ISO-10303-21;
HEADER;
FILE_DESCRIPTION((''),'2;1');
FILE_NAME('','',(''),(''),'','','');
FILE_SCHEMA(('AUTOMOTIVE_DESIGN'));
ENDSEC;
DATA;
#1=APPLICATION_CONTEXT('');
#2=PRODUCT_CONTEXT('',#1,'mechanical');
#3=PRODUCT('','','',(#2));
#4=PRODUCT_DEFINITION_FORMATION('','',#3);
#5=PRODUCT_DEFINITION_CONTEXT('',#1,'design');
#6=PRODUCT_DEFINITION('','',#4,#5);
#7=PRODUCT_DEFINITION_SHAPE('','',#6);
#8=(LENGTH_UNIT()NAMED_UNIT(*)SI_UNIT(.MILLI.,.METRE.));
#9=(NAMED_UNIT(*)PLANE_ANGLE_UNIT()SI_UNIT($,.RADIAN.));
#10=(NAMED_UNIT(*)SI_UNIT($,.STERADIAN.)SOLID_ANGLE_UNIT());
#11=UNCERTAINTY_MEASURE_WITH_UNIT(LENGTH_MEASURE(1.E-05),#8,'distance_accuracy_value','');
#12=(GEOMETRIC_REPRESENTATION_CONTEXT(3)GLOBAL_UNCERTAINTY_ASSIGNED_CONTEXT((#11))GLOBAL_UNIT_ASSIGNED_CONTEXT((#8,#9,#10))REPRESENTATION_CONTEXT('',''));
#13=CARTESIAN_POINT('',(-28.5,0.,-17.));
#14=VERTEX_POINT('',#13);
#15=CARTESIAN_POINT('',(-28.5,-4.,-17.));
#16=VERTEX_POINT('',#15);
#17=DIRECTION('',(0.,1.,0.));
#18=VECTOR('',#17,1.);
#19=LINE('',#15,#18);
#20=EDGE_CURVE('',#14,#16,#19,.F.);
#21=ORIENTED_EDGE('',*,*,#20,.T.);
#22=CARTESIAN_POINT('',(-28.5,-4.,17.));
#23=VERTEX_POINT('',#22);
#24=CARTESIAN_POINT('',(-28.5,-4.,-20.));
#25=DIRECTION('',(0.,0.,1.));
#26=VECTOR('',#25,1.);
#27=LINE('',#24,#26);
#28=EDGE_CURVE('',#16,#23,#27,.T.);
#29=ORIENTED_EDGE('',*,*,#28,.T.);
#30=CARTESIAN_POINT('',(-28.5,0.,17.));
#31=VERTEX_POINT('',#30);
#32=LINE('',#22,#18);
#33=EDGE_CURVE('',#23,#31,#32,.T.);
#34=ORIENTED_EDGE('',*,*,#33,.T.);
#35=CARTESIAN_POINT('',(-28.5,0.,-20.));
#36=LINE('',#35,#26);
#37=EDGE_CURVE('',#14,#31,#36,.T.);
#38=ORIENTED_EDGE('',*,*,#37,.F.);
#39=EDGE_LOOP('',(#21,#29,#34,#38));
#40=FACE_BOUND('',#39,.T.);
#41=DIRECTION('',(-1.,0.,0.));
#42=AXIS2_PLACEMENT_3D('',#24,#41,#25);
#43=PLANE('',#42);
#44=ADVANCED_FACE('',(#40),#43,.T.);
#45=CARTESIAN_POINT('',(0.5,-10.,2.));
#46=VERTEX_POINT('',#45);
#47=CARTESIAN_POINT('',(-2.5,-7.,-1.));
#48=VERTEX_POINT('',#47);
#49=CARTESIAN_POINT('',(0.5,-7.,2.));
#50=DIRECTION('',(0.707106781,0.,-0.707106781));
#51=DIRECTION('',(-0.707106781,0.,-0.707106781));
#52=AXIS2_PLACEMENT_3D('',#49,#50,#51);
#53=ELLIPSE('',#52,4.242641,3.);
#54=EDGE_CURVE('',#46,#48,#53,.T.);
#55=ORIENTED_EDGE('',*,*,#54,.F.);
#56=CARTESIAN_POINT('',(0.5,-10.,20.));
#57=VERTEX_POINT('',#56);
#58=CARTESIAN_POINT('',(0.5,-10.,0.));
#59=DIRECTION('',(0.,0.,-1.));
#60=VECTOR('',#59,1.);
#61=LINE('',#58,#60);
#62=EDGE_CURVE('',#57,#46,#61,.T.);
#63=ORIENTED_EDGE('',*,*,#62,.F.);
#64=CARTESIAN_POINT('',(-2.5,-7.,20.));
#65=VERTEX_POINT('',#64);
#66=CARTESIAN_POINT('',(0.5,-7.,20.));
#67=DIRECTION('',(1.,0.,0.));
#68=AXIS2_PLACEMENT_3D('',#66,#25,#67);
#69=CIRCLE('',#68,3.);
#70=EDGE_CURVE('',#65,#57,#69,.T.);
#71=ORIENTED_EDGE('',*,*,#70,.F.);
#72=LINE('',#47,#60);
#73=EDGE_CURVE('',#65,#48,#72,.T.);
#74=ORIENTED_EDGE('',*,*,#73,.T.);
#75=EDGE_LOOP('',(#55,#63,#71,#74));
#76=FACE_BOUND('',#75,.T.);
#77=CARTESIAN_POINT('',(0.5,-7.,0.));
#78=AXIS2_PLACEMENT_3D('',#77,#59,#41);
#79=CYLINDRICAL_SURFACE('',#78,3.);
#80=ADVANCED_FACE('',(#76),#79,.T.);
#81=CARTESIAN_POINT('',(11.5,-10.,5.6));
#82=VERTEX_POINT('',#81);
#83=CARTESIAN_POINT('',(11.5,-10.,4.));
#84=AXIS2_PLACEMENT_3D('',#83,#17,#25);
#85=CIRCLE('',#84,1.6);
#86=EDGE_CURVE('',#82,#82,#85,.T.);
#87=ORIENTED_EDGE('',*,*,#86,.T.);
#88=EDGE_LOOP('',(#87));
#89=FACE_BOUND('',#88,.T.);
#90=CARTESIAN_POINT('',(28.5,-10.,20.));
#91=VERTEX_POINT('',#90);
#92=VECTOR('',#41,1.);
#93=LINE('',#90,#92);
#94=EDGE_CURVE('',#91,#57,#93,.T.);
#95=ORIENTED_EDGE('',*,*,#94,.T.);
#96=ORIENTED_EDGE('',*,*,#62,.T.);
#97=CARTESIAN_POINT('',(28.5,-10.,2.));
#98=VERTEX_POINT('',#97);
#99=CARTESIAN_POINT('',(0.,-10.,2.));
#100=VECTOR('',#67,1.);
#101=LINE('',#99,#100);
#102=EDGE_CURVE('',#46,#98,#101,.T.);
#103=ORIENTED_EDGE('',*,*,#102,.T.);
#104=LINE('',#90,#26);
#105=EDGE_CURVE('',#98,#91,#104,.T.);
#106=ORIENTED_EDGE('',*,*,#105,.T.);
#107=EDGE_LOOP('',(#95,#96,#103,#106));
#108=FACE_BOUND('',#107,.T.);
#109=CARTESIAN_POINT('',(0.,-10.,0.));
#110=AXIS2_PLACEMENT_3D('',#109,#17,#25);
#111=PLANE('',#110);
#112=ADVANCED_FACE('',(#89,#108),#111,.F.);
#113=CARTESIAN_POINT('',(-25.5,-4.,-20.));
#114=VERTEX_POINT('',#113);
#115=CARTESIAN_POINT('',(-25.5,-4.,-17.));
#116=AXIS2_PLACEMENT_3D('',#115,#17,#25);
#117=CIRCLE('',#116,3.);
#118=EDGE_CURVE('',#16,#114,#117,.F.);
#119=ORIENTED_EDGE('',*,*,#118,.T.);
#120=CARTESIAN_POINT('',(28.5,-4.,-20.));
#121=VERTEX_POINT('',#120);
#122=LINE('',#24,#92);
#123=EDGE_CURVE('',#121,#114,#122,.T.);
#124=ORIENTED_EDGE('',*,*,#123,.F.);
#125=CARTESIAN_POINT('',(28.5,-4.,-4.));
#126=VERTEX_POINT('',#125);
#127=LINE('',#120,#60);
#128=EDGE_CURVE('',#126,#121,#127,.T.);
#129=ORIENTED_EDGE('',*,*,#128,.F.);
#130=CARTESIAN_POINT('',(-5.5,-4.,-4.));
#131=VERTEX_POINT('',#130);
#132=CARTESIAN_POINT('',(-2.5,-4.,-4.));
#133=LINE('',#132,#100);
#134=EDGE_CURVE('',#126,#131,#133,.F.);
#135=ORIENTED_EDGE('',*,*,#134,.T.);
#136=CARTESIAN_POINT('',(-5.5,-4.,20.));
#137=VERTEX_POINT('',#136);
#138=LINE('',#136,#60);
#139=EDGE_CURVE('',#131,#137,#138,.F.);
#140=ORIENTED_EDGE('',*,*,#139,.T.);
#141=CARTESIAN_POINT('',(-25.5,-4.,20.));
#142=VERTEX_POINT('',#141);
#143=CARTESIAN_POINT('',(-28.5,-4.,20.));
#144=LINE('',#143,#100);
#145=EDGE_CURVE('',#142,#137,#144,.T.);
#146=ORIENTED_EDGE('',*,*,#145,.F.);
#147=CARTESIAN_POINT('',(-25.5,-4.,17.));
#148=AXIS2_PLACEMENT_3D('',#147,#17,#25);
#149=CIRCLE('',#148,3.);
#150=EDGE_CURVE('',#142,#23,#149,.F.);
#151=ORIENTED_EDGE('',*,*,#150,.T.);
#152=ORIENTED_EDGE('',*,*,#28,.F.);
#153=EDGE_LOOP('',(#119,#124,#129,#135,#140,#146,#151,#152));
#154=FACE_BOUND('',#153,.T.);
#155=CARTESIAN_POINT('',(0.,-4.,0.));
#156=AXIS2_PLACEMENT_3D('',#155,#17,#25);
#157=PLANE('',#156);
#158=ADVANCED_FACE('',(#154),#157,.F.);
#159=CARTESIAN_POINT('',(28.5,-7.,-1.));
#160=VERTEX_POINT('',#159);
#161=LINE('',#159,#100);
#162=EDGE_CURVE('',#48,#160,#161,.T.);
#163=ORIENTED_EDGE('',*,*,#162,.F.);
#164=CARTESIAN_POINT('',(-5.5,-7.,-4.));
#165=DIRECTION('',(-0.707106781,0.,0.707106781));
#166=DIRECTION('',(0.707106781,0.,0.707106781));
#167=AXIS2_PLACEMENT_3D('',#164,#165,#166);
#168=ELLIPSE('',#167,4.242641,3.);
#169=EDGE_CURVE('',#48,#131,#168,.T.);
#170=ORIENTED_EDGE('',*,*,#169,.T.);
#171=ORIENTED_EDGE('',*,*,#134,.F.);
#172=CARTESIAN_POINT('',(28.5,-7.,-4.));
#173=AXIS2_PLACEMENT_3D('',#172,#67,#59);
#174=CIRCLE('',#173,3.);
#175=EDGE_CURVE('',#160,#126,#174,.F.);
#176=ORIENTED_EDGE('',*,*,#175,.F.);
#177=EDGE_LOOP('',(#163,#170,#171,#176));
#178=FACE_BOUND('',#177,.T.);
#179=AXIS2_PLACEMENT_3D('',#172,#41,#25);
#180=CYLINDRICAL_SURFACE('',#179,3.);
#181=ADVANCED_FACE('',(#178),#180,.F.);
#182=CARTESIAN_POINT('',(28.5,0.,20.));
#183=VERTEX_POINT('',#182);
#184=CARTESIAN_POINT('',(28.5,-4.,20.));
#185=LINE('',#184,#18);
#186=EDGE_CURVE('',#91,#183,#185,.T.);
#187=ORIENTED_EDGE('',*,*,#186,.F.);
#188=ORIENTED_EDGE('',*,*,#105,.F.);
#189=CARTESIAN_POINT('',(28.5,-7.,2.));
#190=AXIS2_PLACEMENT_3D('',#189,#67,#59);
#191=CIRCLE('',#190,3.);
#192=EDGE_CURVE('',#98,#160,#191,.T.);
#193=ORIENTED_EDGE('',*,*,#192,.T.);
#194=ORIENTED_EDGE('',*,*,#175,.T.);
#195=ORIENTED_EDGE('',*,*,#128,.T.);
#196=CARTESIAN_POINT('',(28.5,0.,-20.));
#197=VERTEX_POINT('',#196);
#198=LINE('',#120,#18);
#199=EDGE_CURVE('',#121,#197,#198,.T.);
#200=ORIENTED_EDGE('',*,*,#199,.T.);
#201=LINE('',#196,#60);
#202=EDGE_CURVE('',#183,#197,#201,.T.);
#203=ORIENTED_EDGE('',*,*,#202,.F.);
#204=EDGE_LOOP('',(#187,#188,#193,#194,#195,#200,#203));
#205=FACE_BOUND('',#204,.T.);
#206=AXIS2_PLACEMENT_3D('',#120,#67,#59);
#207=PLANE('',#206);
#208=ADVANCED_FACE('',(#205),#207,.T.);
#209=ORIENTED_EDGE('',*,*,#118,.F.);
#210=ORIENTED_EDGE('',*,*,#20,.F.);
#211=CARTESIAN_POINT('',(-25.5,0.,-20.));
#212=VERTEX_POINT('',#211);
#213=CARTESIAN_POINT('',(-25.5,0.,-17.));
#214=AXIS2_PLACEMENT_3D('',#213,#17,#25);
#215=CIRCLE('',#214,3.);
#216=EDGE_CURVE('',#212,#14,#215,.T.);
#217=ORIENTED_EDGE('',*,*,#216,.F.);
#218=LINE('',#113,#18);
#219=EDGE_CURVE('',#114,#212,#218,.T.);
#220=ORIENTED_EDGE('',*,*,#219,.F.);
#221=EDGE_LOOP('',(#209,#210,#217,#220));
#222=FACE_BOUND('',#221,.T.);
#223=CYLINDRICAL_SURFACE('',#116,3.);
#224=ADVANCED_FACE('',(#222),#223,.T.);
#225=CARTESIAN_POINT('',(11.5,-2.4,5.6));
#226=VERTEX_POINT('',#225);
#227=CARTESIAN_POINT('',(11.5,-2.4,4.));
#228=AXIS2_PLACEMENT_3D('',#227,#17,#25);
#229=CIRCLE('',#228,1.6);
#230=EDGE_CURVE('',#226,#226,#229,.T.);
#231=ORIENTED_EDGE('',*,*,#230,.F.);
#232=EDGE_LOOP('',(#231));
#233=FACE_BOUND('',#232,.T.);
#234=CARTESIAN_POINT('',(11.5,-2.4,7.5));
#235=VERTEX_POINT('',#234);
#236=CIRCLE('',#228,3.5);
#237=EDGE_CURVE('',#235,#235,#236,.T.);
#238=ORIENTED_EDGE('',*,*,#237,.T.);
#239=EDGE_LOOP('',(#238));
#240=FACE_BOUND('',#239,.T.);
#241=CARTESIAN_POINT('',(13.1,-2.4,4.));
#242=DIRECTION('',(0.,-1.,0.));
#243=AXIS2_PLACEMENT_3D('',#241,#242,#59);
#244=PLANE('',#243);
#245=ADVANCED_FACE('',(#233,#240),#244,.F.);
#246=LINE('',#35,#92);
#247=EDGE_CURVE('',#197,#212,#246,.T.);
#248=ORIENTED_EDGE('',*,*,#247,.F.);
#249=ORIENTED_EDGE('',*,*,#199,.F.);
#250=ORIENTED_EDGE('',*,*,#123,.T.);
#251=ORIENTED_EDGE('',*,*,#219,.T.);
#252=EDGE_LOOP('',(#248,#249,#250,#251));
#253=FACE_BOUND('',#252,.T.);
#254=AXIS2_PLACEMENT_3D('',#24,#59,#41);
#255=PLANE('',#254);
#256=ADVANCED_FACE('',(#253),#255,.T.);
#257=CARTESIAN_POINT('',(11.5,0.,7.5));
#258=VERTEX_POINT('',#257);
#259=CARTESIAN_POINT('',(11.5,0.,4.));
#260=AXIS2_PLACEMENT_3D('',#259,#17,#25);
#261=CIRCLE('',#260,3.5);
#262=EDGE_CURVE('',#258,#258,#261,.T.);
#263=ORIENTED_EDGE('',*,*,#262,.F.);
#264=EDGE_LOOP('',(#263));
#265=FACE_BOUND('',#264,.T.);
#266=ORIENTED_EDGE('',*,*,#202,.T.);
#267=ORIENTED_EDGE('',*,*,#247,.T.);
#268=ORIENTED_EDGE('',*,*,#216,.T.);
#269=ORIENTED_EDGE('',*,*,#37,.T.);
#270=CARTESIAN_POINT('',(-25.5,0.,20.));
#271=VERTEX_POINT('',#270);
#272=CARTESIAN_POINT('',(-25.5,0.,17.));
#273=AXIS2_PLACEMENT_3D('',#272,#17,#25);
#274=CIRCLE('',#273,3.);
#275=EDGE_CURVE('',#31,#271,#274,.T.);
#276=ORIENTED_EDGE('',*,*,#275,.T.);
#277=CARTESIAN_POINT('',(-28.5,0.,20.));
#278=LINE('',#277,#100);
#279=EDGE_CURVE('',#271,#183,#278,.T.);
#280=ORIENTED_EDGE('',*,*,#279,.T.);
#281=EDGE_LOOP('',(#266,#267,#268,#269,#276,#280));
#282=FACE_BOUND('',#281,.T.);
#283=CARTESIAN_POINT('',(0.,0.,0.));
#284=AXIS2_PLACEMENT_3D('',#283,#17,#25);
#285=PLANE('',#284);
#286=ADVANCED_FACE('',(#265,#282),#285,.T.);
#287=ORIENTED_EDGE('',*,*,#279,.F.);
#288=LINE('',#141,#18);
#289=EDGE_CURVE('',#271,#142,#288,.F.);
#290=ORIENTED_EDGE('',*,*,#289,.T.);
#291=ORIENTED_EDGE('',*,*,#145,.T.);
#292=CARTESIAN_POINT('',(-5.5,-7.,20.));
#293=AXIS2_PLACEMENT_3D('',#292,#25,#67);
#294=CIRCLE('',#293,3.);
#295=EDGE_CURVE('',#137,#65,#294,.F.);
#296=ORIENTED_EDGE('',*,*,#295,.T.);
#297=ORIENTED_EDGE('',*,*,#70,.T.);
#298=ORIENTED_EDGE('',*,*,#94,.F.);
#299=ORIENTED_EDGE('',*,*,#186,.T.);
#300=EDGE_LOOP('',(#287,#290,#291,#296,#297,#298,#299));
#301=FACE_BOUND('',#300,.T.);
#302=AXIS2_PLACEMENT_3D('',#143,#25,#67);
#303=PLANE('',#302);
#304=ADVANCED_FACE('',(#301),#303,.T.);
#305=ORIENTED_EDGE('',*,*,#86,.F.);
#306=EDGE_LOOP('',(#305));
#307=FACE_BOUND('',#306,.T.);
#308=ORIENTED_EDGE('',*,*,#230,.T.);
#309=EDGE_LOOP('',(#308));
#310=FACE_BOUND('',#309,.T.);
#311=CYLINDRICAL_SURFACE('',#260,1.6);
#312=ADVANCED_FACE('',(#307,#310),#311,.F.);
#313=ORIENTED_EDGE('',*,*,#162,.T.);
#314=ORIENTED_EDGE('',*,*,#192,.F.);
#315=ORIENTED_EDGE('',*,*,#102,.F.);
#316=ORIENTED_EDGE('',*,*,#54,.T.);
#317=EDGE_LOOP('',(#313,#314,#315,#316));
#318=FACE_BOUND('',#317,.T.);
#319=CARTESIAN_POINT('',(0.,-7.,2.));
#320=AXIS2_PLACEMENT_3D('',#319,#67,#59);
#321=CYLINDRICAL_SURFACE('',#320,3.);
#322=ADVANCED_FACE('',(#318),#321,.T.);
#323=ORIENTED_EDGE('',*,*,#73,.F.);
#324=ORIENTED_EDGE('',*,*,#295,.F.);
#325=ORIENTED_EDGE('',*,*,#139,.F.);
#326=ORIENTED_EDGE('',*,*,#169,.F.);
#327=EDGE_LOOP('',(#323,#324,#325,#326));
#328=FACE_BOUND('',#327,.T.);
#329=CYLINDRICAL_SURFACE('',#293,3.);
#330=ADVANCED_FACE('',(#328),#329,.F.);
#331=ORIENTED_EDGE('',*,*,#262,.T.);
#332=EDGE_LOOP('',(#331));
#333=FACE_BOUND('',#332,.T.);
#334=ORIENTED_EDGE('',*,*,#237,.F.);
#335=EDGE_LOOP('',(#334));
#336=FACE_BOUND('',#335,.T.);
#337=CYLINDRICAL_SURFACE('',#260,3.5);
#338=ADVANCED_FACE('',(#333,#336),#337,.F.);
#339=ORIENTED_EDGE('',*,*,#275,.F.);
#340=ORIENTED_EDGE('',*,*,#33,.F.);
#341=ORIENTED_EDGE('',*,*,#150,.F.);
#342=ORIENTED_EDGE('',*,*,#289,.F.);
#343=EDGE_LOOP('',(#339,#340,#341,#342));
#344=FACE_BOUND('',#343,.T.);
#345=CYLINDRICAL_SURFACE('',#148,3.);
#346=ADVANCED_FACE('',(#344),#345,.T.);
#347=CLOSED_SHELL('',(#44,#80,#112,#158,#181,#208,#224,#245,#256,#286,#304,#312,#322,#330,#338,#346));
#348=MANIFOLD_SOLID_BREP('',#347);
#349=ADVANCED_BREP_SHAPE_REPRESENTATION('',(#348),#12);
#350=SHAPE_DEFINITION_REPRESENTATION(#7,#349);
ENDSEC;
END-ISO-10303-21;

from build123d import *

# Parameters (mm, degrees)
SKETCH1_W                                = 57
SKETCH1_H                                = 40
BOSS_EXTRUDE1_DEPTH                      = 4
SKETCH2_W                                = 31
SKETCH2_H                                = 21
BOSS_EXTRUDE2_DEPTH                      = 6
CBORE_FOR_M3_PAN_HEAD_SCREW1_D           = 3.2
CBORE_FOR_M3_PAN_HEAD_SCREW1_CBORE_D     = 7
CBORE_FOR_M3_PAN_HEAD_SCREW1_CBORE_DEPTH = 2.4
FILLET1_R                                = 3


with BuildPart() as part:
    # Sketch1 → Boss-Extrude1 (new body)
    with BuildSketch(Plane(origin=(0, 0, 0), x_dir=(1, 0, 0), z_dir=(0, 1, 0))):
        Rectangle(SKETCH1_W, SKETCH1_H)
    extrude(amount=-BOSS_EXTRUDE1_DEPTH)

    # Sketch2 → Boss-Extrude2 (add)
    with BuildSketch(Plane.XZ.offset(4)):
        with Locations((13, 9.5)):
            Rectangle(SKETCH2_W, SKETCH2_H)
    extrude(amount=BOSS_EXTRUDE2_DEPTH)

    # CBORE for M3 Pan Head Screw1 (through all)
    with Locations(Plane(origin=(0, 0, 0), x_dir=(1, 0, 0), z_dir=(0, 1, 0))):
        with Locations((11.5, -4)):
            CounterBoreHole(CBORE_FOR_M3_PAN_HEAD_SCREW1_D / 2, CBORE_FOR_M3_PAN_HEAD_SCREW1_CBORE_D / 2, CBORE_FOR_M3_PAN_HEAD_SCREW1_CBORE_DEPTH)

    # Fillet1
    fillet1_edges = [part.edges().sort_by_distance(p)[0] for p in [
        (13, -10, -1),
        (-2.5, -10, 9.5),
        (13, -4, -1),
        (-2.5, -4, 9.5),
        (-28.5, -2, 20),
        (-28.5, -2, -20),
    ]]
    fillet(fillet1_edges, radius=FILLET1_R - 0.0001)  # a hair under: the kernel refuses the full size


solid = part.part
